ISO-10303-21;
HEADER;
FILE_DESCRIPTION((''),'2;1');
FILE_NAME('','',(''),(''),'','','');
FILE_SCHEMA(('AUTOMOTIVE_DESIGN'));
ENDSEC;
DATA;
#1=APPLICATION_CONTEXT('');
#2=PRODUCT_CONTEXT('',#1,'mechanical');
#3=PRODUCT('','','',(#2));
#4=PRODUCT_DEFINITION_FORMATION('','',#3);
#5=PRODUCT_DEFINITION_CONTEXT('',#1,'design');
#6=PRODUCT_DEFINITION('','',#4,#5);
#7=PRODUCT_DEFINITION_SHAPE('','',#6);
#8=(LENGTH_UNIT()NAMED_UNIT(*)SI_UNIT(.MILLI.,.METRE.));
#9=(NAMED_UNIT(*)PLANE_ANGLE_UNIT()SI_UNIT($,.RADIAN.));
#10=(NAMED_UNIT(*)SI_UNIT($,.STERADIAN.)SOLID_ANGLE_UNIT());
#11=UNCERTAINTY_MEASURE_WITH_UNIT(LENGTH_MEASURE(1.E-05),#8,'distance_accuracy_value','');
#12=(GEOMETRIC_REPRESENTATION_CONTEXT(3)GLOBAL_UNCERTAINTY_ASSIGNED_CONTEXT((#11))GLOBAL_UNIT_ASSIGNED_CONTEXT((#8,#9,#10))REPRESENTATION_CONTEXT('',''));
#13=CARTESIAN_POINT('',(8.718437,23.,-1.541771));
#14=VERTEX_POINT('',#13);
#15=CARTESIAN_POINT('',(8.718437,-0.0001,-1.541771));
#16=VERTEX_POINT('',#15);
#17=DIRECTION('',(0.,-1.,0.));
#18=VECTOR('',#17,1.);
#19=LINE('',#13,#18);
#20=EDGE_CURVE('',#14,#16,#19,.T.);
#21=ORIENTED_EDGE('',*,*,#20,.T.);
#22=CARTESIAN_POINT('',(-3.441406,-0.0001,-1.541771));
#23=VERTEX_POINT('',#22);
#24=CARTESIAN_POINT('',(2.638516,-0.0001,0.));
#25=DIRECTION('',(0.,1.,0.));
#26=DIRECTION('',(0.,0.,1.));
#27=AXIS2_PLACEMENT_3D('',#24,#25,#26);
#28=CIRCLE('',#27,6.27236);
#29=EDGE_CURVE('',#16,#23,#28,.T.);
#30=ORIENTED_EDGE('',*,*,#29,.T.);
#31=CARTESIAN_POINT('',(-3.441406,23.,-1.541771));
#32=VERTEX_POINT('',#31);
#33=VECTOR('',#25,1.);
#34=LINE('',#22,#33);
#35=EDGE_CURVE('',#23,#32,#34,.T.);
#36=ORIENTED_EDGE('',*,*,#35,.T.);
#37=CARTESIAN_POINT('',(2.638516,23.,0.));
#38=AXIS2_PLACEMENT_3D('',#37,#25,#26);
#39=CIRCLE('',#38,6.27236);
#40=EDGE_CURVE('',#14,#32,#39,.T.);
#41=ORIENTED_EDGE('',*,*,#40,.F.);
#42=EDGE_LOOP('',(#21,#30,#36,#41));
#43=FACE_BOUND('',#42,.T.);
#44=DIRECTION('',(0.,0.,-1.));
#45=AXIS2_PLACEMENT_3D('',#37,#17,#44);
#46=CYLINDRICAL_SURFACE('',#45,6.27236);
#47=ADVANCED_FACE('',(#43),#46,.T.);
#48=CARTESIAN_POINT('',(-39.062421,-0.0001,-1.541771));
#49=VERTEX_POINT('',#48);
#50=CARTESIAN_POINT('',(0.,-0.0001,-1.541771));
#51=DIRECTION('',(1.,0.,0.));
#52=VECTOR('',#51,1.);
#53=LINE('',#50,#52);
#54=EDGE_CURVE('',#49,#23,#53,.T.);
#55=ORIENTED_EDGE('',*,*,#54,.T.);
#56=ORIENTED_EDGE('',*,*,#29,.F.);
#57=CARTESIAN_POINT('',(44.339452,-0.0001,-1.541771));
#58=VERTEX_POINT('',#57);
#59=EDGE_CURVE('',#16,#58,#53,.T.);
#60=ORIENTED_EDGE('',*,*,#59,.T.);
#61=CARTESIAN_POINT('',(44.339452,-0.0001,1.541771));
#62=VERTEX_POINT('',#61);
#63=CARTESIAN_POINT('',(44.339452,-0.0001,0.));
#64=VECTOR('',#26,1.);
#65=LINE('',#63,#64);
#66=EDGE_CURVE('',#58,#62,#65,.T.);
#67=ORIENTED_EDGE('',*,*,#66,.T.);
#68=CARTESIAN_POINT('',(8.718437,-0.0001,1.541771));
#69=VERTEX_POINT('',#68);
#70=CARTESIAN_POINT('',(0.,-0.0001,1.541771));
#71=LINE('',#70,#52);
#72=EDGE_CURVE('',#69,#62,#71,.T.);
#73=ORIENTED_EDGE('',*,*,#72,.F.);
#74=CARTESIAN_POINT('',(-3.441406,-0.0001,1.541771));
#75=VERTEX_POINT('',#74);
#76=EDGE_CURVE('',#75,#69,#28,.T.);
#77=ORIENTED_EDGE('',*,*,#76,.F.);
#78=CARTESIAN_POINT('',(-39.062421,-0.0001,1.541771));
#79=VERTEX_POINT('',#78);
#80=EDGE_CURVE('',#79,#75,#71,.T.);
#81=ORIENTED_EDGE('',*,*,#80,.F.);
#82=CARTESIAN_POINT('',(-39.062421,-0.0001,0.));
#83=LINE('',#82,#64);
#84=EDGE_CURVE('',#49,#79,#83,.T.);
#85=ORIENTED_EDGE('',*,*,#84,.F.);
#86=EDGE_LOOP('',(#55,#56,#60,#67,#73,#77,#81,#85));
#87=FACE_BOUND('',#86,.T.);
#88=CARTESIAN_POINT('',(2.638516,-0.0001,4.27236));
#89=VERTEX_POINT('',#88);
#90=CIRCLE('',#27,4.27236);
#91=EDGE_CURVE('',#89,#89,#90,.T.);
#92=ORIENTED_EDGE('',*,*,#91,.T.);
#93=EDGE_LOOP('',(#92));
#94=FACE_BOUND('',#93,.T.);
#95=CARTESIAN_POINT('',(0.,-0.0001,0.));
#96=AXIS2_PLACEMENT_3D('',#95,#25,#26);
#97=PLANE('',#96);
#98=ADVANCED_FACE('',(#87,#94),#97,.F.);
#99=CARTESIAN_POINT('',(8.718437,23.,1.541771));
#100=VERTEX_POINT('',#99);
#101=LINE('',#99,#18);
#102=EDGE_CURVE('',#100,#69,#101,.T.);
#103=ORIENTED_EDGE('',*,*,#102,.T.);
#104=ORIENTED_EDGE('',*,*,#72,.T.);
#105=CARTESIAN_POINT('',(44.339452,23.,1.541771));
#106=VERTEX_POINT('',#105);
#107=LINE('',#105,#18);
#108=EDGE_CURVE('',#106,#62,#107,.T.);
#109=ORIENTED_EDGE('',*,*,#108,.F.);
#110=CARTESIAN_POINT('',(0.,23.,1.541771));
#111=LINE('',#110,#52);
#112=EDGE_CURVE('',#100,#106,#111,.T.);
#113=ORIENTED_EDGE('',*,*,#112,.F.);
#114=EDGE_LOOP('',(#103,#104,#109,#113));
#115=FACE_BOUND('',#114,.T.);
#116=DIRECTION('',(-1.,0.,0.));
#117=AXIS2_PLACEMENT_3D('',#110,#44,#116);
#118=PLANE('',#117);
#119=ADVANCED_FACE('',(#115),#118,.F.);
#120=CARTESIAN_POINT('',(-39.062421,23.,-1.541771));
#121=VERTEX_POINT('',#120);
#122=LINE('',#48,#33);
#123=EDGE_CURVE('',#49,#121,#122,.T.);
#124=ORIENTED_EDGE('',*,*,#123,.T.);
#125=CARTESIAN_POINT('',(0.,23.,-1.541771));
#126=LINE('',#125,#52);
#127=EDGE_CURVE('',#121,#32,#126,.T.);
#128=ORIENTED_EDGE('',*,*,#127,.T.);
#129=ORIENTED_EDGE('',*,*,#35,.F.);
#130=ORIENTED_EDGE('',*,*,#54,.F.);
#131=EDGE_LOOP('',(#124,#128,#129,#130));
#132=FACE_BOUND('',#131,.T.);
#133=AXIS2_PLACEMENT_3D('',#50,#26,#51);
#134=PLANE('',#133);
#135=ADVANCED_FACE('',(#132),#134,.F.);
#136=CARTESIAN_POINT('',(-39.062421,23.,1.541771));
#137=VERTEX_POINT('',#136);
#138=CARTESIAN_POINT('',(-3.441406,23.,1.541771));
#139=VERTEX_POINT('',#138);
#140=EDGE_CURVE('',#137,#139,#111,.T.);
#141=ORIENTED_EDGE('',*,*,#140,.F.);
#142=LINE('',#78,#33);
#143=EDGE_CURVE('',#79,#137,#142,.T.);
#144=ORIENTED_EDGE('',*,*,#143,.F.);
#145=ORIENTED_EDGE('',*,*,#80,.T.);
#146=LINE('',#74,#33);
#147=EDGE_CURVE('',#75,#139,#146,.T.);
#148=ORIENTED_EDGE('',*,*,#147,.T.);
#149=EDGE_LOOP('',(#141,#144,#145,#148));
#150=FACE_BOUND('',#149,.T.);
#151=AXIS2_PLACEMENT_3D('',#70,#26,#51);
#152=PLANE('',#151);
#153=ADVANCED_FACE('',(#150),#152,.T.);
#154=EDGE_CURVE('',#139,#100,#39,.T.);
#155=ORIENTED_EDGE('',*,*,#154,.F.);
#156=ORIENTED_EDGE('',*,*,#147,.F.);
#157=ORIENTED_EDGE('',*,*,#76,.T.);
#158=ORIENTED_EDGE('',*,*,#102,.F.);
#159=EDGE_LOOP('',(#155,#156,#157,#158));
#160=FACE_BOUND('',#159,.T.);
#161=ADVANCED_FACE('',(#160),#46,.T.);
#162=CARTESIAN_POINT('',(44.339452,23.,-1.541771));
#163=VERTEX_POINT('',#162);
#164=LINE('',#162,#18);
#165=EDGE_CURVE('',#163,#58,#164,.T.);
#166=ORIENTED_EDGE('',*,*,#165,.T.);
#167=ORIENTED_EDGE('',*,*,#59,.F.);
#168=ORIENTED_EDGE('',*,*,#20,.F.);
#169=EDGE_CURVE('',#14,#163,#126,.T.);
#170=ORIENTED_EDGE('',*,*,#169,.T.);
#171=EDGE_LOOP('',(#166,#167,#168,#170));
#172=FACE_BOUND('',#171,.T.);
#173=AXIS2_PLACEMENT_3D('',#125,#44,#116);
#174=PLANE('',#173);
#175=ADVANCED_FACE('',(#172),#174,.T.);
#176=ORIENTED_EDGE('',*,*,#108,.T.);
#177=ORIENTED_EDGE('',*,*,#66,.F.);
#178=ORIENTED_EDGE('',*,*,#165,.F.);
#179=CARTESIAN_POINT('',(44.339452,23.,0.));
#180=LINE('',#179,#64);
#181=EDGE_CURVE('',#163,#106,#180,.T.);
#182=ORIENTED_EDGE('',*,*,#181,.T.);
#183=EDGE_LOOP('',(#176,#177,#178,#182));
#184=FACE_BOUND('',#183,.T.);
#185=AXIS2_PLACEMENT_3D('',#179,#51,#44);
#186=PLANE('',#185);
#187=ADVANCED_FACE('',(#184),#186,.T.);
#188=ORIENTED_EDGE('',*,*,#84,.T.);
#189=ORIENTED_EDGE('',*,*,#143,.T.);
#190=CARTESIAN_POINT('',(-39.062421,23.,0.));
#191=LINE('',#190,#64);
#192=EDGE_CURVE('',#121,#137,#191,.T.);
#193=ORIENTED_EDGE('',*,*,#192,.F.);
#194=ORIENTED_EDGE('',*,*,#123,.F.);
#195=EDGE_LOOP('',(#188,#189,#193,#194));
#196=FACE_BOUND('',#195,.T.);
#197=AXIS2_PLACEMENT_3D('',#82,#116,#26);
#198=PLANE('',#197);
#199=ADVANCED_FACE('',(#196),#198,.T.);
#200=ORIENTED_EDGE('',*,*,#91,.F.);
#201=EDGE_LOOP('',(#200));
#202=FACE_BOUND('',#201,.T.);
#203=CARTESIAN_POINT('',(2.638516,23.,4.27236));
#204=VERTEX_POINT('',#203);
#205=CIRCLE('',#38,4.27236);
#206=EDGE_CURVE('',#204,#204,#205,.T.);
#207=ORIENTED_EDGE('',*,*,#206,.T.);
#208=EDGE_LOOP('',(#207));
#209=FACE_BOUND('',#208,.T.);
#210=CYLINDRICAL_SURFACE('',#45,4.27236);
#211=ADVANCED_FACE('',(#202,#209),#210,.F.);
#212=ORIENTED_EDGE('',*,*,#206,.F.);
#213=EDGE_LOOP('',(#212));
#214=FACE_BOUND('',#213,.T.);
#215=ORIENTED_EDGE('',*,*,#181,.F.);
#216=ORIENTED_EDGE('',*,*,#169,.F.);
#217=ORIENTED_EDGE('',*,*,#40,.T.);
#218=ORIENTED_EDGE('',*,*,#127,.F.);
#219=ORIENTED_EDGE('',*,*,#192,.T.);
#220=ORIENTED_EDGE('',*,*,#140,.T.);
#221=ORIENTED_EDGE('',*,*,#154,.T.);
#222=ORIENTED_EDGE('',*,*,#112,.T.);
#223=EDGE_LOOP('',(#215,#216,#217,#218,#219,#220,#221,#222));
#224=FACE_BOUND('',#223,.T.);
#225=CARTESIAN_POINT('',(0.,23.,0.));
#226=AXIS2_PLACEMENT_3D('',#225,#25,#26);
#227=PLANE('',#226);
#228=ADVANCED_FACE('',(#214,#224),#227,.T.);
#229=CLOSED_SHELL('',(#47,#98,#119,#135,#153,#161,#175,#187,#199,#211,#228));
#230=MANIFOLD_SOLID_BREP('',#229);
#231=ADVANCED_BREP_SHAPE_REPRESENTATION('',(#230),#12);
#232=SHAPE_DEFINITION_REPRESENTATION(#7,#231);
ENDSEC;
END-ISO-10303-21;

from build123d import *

# Parameters (mm, degrees)
BOSS_EXTRUDE2_DEPTH      = 23
BOSS_EXTRUDE2_DEPTH_BACK = 0.0001
SKETCH2_R                = 6.272360189
SKETCH2_W                = 83.401872842
SKETCH2_H                = 3.0835427
SHELL3_START             = -0.0001
SHELL3_OUTLINE_R         = 4.272360189
SHELL3_DEPTH             = 23.0001


# Read off the part's stored shape, not the designer's step: Shell3
with BuildPart() as part:
    # Sketch2 → Boss-Extrude2 (new, two sides: drawn at the far end of the back side and taken through both)
    with BuildSketch(Plane(origin=(0, 0, 0), x_dir=(1, 0, 0), z_dir=(0, 1, 0)).offset(-BOSS_EXTRUDE2_DEPTH_BACK)):
        with Locations((2.638515629, 0)):
            Circle(SKETCH2_R)
        with Locations((2.638515629, 0)):
            Rectangle(SKETCH2_W, SKETCH2_H)
    extrude(amount=BOSS_EXTRUDE2_DEPTH + BOSS_EXTRUDE2_DEPTH_BACK)

    # Shell3 outline → Shell3 (cut)
    with BuildSketch(Plane(origin=(0, 0, 0), x_dir=(1, 0, 0), z_dir=(0, 1, 0)).offset(SHELL3_START)):
        with Locations((2.638515629, 0)):
            Circle(SHELL3_OUTLINE_R)
    extrude(amount=SHELL3_DEPTH, mode=Mode.SUBTRACT)


solid = part.part
